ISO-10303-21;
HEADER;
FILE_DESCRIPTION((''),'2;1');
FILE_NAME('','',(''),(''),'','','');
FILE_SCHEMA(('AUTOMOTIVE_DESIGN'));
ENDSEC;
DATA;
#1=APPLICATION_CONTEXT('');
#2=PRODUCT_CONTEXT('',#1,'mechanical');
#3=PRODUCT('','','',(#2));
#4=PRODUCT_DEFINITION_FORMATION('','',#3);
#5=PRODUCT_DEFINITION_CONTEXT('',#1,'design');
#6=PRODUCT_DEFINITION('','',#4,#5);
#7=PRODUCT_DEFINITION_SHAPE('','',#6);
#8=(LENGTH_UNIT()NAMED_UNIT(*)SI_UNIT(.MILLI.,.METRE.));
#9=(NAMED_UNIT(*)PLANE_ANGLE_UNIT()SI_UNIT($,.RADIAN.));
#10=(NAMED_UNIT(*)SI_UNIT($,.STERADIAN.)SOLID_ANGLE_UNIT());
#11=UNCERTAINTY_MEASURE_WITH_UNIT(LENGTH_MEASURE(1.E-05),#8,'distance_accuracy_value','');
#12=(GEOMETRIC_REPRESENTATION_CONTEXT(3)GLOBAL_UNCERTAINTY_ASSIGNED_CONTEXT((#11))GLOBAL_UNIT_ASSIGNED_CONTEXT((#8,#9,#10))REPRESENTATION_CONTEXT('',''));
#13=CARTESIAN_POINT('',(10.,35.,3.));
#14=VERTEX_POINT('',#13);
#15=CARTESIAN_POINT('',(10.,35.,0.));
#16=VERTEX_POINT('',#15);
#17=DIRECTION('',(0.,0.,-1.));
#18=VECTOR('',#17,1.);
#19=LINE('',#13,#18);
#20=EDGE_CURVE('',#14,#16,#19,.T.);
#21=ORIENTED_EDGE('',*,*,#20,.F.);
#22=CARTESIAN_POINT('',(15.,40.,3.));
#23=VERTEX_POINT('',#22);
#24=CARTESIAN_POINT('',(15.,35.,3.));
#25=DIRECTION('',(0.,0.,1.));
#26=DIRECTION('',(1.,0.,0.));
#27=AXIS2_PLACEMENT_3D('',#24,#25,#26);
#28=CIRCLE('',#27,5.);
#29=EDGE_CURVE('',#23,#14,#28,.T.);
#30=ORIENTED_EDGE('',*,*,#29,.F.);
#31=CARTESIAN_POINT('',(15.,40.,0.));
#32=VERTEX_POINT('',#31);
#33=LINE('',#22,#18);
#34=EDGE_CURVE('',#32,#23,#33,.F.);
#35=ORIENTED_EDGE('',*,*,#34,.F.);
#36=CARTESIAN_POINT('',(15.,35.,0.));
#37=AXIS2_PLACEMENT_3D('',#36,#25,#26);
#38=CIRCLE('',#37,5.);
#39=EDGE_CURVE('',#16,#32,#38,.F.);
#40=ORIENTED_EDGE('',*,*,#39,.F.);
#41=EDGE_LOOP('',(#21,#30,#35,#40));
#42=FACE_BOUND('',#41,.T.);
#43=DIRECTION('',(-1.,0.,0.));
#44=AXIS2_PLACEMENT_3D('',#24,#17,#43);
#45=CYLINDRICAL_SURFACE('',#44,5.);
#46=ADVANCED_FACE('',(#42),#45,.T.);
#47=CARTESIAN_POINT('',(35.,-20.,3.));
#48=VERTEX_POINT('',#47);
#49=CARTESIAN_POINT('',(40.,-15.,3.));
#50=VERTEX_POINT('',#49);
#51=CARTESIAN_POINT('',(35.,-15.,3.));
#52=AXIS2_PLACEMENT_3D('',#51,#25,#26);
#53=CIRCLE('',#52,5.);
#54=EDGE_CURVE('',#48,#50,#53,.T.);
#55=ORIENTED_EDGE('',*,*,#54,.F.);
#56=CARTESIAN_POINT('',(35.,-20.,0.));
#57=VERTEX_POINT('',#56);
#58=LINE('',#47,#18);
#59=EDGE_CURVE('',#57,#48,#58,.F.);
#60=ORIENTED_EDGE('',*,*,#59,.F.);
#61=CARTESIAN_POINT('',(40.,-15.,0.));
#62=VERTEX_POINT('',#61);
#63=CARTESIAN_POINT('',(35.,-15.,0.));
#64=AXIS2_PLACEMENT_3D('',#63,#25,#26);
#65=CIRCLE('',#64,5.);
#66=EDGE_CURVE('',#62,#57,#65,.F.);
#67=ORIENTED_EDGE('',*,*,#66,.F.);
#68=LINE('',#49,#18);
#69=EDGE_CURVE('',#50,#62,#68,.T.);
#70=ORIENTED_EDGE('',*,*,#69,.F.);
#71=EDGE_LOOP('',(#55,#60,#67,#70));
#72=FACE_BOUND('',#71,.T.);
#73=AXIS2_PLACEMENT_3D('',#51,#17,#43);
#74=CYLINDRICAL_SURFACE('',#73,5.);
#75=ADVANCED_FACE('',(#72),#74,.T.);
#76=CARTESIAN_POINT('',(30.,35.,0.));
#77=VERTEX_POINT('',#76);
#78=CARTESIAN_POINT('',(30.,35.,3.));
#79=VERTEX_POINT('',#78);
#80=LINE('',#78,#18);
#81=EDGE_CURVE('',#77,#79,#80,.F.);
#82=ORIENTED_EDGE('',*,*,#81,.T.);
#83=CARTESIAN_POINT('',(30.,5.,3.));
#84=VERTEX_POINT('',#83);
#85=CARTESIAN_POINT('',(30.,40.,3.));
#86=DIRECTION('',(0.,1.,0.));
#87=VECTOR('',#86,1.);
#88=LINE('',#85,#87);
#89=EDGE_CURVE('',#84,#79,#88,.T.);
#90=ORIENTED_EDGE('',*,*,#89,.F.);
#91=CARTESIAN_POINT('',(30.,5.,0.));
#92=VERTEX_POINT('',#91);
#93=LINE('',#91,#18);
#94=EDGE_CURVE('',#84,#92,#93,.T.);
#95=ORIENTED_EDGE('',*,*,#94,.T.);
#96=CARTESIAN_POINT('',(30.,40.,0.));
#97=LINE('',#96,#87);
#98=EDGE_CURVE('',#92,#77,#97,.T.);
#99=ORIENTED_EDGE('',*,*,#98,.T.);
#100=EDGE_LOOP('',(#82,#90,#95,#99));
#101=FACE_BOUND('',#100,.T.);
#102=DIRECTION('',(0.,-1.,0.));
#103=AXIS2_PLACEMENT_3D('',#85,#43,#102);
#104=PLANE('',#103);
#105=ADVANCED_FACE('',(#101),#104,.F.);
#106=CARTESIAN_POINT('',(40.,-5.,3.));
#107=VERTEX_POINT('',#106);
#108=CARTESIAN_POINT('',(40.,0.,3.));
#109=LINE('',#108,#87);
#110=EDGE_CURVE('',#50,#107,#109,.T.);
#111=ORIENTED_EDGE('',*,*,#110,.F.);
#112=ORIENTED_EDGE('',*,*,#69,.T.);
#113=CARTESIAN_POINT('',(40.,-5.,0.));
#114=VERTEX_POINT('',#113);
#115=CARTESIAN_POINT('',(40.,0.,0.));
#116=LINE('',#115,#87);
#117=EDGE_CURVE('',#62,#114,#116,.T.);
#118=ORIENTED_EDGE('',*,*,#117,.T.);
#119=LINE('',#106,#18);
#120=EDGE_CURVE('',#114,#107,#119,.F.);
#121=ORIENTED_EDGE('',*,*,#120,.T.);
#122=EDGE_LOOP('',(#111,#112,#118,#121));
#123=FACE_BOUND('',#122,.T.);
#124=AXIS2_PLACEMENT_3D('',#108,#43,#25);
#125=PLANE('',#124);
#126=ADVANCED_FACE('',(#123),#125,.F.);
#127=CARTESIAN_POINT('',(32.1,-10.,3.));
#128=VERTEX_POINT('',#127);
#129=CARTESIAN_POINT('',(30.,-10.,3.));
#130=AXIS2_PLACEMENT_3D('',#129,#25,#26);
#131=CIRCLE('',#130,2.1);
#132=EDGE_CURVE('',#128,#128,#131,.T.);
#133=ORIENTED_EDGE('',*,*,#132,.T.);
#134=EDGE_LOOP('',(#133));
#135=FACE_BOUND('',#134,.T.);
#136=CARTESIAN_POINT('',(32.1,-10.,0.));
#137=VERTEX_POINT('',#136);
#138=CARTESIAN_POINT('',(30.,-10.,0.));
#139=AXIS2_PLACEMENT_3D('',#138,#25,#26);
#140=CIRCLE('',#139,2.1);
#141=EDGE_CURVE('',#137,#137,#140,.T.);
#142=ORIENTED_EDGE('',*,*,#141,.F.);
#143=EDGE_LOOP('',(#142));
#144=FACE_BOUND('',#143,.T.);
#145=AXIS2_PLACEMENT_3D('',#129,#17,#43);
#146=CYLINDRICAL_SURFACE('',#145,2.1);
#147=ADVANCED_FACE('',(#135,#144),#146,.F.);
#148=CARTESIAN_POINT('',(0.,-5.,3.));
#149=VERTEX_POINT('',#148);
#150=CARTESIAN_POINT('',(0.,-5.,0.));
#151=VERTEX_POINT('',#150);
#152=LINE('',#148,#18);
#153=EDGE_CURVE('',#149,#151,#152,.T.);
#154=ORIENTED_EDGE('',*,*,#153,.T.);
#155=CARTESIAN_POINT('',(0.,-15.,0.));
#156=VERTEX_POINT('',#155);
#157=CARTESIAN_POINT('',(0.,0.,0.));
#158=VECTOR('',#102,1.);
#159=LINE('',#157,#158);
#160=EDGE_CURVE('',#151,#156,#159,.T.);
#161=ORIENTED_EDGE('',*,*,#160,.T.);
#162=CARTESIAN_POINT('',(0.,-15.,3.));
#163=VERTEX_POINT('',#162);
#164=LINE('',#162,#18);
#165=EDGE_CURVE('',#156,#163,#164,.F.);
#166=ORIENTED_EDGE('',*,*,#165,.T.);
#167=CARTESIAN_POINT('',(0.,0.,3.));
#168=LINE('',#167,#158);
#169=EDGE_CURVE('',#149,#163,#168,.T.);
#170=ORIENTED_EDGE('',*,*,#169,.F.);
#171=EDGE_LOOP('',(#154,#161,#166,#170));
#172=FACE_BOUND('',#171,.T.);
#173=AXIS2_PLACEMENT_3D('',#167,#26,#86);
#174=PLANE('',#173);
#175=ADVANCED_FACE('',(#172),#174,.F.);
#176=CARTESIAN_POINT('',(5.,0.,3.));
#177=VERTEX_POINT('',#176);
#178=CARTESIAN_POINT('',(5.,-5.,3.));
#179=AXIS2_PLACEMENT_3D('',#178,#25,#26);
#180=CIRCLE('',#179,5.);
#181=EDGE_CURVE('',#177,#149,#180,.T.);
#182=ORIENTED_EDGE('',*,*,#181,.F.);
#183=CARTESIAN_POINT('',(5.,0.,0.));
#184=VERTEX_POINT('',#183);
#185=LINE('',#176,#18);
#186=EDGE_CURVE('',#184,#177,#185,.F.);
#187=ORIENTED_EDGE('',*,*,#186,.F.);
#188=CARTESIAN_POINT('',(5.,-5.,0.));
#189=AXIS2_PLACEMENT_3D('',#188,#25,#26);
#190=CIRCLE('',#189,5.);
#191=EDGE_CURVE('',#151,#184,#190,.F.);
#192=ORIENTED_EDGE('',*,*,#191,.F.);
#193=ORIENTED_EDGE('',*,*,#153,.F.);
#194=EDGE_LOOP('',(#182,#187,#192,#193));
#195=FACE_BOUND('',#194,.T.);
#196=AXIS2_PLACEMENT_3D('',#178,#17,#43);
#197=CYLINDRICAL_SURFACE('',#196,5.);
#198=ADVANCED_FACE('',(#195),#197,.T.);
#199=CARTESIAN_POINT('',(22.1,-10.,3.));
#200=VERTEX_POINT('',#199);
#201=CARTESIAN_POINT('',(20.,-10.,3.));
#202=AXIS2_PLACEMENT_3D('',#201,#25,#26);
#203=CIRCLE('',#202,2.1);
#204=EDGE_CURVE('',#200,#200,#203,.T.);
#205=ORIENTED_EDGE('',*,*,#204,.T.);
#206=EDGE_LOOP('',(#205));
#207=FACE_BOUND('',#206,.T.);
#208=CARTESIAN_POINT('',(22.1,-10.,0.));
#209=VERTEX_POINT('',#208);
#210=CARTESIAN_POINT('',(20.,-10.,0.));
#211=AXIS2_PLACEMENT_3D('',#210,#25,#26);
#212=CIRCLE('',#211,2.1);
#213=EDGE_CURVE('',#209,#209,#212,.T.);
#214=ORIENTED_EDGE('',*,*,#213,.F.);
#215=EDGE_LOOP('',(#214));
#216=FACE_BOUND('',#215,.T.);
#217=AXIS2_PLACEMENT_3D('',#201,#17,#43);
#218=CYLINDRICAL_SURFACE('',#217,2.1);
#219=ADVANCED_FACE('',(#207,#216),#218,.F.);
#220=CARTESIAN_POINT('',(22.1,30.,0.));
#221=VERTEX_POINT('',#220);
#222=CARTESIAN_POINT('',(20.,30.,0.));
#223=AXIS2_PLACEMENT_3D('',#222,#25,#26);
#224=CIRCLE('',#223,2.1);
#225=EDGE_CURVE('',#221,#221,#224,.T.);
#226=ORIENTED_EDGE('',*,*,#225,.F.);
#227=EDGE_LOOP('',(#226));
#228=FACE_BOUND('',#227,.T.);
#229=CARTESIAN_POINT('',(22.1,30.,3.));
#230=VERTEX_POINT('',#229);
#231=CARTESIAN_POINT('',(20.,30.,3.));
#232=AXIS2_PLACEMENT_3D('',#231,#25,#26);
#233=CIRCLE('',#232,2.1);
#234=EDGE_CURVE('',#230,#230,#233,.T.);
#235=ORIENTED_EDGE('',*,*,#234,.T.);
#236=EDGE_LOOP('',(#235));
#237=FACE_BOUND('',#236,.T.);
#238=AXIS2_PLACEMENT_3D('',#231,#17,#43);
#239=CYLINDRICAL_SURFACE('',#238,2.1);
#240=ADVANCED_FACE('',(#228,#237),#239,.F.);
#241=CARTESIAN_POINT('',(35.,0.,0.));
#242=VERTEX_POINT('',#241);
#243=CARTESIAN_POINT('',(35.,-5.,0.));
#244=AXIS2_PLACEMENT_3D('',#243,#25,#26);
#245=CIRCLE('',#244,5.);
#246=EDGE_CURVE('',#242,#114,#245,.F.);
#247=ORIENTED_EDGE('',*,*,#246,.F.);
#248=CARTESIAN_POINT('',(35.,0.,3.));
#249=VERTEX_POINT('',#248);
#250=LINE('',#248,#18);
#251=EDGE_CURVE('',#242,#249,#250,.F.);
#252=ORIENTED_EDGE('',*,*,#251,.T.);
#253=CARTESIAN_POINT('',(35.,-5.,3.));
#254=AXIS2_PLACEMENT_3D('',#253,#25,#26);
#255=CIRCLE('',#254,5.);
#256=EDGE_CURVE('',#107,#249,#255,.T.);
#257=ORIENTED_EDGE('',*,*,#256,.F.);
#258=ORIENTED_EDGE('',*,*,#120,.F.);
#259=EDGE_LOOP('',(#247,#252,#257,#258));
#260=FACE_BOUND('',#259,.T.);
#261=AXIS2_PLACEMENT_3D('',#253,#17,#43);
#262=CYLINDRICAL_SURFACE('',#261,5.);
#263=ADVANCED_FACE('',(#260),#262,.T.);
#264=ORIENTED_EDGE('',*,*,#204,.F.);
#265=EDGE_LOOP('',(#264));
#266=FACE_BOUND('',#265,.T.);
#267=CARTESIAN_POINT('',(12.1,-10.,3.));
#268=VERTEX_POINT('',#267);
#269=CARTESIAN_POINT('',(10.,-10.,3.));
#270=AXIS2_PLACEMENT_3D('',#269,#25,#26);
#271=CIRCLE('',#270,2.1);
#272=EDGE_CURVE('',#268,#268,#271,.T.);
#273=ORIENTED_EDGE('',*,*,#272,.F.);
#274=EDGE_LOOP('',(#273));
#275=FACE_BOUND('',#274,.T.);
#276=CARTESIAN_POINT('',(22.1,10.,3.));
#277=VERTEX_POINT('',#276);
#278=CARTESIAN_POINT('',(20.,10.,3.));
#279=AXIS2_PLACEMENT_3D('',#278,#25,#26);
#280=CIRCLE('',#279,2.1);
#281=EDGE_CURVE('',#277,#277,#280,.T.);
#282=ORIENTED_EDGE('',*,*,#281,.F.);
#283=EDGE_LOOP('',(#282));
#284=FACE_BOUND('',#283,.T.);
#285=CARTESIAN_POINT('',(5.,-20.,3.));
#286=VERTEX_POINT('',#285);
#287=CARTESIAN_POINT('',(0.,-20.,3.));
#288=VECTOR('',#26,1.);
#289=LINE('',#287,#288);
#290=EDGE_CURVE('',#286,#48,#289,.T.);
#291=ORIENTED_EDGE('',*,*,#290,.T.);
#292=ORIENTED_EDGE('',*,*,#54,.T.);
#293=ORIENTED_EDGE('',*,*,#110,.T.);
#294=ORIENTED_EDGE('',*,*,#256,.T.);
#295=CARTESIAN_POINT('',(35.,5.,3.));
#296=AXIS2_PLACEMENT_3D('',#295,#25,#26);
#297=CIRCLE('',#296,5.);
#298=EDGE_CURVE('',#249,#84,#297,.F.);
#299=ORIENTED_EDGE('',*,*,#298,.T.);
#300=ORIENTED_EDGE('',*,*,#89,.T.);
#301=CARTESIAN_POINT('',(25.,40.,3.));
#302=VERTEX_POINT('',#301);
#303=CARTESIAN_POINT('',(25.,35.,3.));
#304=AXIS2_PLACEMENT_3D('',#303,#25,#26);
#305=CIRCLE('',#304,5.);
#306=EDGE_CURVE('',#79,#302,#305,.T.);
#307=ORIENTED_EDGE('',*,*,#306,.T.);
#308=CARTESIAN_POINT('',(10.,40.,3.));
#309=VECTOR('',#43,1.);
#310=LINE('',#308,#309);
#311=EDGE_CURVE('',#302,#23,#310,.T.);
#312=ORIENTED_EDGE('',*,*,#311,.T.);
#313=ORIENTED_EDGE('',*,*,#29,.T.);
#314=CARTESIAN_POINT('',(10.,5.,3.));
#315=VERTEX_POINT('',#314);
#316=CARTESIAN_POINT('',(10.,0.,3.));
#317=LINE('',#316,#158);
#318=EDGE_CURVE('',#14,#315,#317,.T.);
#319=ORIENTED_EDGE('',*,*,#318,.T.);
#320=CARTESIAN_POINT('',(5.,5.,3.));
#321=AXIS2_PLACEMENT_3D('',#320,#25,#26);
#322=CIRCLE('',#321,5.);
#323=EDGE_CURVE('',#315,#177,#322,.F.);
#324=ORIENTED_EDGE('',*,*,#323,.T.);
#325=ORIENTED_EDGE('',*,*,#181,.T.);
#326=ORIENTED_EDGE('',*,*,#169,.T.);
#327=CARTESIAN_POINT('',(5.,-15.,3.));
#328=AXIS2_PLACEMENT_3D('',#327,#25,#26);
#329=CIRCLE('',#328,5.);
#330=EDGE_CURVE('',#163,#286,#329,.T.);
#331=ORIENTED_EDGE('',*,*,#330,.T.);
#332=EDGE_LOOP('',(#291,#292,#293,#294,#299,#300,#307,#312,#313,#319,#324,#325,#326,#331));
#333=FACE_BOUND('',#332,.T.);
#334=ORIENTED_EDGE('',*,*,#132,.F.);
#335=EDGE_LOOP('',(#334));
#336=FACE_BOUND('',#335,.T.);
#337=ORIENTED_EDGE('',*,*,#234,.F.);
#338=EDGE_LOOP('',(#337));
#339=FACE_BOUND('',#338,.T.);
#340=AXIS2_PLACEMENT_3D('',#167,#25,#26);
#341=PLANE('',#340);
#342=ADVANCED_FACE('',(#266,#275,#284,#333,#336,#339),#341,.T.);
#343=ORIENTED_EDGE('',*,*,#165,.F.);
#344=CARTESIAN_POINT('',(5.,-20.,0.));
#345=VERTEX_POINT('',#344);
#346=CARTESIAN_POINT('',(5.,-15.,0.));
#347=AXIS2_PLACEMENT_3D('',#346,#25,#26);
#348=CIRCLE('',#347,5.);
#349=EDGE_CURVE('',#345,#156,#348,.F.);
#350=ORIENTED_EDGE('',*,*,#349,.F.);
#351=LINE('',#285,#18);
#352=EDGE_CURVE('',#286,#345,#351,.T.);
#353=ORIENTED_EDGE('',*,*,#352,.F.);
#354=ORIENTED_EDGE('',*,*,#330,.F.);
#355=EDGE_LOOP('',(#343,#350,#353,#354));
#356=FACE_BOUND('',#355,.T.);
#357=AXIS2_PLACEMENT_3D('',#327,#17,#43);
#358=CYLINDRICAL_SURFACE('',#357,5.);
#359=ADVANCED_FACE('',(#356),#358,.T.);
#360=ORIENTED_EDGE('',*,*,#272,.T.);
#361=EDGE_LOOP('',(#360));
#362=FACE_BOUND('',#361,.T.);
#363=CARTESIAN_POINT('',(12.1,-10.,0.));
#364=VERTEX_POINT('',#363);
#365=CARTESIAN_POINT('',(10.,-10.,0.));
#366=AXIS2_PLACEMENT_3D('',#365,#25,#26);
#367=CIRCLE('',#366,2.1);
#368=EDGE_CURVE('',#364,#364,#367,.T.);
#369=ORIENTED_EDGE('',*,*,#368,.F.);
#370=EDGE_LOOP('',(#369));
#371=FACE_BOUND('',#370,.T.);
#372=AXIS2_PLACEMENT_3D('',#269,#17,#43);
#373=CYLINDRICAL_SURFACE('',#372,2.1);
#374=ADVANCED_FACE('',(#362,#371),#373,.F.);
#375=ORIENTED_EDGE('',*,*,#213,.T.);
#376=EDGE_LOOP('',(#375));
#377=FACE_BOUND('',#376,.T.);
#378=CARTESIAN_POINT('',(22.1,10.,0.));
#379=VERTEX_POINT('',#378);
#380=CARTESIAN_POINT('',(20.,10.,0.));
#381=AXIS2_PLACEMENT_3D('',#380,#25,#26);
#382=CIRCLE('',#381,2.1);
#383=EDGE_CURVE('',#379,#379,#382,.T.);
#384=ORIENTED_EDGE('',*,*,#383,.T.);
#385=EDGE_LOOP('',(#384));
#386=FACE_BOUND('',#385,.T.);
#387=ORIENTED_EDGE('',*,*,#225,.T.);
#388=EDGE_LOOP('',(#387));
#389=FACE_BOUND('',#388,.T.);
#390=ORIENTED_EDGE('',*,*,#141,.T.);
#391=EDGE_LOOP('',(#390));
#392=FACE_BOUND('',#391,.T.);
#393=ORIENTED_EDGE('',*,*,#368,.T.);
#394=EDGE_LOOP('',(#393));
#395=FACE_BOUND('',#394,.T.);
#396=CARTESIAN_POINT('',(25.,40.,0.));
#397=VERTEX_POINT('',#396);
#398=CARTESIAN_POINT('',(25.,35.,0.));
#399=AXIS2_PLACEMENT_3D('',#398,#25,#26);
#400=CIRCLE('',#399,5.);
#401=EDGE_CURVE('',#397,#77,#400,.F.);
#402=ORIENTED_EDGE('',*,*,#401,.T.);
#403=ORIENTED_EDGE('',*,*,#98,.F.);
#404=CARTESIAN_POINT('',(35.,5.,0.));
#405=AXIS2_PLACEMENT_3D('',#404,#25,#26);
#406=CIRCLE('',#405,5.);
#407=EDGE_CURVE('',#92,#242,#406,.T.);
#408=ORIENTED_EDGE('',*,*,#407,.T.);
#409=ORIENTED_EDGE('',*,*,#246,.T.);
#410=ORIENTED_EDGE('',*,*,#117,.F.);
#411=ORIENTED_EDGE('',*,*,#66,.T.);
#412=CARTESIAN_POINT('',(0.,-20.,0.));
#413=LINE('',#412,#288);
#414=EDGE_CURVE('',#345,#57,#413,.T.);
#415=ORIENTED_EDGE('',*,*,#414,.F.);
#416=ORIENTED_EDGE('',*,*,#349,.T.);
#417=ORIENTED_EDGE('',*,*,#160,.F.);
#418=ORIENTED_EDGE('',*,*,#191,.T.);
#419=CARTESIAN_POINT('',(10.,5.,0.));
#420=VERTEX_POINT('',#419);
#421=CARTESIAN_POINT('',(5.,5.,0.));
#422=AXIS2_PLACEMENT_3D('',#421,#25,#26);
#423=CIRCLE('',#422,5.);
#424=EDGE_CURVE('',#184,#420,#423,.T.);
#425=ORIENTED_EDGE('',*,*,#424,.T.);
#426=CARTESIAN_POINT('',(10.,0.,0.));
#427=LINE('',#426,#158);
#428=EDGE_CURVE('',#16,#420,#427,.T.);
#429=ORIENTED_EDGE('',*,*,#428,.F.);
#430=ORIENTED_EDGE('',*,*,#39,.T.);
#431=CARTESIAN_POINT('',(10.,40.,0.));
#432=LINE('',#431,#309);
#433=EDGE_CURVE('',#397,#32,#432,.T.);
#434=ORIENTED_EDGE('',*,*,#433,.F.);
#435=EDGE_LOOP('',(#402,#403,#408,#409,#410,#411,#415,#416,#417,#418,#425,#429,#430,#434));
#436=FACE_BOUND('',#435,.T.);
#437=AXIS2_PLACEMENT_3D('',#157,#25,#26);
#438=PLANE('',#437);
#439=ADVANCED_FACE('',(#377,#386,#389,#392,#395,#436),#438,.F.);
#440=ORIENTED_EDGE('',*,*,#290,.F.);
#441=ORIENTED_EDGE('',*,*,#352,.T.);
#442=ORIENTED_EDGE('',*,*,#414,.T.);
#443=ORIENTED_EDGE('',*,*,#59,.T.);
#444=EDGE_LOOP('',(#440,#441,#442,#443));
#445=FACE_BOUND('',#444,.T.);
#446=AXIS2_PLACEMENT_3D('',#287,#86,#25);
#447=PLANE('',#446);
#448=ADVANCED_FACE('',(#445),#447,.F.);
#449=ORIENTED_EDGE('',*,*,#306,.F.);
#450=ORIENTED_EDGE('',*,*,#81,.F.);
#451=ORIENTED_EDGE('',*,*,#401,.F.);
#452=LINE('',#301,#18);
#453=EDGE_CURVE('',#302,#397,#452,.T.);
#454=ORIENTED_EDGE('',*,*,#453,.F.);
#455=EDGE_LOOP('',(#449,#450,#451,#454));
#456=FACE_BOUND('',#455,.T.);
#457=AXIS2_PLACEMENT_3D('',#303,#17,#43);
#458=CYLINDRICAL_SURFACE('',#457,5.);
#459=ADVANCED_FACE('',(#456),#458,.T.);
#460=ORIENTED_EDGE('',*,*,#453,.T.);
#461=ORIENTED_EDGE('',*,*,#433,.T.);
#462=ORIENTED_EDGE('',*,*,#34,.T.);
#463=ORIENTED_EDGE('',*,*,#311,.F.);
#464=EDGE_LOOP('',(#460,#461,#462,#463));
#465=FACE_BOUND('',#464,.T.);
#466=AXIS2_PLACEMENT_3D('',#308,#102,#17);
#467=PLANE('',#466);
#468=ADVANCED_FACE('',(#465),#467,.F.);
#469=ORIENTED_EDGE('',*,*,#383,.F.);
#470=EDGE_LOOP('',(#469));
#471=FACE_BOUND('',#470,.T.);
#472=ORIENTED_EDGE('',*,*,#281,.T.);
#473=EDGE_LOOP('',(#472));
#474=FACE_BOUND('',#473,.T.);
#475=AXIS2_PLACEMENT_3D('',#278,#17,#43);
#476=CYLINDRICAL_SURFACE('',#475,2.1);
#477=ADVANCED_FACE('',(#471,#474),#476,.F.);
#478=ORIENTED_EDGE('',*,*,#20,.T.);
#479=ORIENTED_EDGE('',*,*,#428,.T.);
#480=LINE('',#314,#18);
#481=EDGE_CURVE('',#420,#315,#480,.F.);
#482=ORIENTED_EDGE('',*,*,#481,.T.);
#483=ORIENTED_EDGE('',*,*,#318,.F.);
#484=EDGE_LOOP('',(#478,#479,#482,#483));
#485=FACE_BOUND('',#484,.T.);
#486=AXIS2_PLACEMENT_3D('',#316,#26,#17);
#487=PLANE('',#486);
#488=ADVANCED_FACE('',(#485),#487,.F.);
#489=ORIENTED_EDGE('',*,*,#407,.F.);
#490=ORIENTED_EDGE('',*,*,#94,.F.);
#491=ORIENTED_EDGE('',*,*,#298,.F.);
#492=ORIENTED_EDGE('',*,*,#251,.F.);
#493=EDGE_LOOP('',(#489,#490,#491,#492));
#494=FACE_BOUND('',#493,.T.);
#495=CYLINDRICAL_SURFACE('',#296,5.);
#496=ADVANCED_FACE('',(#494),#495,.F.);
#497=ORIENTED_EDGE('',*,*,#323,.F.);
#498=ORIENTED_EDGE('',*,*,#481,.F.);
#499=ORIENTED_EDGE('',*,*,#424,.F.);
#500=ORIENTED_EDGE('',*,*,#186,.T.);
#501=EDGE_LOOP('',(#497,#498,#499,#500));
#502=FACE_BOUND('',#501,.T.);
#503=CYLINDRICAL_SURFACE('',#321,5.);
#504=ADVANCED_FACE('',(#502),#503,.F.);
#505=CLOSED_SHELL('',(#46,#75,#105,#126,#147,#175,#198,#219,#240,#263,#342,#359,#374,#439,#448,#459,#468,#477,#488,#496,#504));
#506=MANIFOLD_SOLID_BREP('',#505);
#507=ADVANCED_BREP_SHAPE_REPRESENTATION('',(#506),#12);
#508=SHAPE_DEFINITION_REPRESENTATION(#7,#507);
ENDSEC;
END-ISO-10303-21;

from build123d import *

# Parameters (mm, degrees)
SKETCH_1_R      = 2.1
EXTRUDE_1_DEPTH = 3
FILLET_1_R      = 5
FILLET_2_R      = 5


with BuildPart() as part:
    # 草图1 → 凸台-拉伸1 (new body)
    with BuildSketch(Plane.XY):
        Polygon((10, 0), (10, 40), (30, 40), (30, 0), (40, 0), (40, -20), (0, -20), (0, 0), align=None)
        with Locations((20, -10)):
            Circle(SKETCH_1_R, mode=Mode.SUBTRACT)
        with Locations((10, -10)):
            Circle(SKETCH_1_R, mode=Mode.SUBTRACT)
        with Locations((30, -10)):
            Circle(SKETCH_1_R, mode=Mode.SUBTRACT)
        with Locations((20, 10)):
            Circle(SKETCH_1_R, mode=Mode.SUBTRACT)
        with Locations((20, 30)):
            Circle(SKETCH_1_R, mode=Mode.SUBTRACT)
    extrude(amount=EXTRUDE_1_DEPTH)

    # 圆角1
    fillet_1_edges = [part.edges().sort_by_distance(p)[0] for p in [
        (10, 40, 1.5),
        (30, 40, 1.5),
        (40, -20, 1.5),
        (40, 0, 1.5),
        (30, 0, 1.5),
        (10, 0, 1.5),
        (0, 0, 1.5),
    ]]
    fillet(fillet_1_edges, radius=FILLET_1_R - 0.0001)  # a hair under: the kernel refuses the full size

    # 圆角2
    fillet_2_edges = [part.edges().sort_by_distance(p)[0] for p in [
        (0, -20, 1.5),
    ]]
    fillet(fillet_2_edges, radius=FILLET_2_R)


solid = part.part
